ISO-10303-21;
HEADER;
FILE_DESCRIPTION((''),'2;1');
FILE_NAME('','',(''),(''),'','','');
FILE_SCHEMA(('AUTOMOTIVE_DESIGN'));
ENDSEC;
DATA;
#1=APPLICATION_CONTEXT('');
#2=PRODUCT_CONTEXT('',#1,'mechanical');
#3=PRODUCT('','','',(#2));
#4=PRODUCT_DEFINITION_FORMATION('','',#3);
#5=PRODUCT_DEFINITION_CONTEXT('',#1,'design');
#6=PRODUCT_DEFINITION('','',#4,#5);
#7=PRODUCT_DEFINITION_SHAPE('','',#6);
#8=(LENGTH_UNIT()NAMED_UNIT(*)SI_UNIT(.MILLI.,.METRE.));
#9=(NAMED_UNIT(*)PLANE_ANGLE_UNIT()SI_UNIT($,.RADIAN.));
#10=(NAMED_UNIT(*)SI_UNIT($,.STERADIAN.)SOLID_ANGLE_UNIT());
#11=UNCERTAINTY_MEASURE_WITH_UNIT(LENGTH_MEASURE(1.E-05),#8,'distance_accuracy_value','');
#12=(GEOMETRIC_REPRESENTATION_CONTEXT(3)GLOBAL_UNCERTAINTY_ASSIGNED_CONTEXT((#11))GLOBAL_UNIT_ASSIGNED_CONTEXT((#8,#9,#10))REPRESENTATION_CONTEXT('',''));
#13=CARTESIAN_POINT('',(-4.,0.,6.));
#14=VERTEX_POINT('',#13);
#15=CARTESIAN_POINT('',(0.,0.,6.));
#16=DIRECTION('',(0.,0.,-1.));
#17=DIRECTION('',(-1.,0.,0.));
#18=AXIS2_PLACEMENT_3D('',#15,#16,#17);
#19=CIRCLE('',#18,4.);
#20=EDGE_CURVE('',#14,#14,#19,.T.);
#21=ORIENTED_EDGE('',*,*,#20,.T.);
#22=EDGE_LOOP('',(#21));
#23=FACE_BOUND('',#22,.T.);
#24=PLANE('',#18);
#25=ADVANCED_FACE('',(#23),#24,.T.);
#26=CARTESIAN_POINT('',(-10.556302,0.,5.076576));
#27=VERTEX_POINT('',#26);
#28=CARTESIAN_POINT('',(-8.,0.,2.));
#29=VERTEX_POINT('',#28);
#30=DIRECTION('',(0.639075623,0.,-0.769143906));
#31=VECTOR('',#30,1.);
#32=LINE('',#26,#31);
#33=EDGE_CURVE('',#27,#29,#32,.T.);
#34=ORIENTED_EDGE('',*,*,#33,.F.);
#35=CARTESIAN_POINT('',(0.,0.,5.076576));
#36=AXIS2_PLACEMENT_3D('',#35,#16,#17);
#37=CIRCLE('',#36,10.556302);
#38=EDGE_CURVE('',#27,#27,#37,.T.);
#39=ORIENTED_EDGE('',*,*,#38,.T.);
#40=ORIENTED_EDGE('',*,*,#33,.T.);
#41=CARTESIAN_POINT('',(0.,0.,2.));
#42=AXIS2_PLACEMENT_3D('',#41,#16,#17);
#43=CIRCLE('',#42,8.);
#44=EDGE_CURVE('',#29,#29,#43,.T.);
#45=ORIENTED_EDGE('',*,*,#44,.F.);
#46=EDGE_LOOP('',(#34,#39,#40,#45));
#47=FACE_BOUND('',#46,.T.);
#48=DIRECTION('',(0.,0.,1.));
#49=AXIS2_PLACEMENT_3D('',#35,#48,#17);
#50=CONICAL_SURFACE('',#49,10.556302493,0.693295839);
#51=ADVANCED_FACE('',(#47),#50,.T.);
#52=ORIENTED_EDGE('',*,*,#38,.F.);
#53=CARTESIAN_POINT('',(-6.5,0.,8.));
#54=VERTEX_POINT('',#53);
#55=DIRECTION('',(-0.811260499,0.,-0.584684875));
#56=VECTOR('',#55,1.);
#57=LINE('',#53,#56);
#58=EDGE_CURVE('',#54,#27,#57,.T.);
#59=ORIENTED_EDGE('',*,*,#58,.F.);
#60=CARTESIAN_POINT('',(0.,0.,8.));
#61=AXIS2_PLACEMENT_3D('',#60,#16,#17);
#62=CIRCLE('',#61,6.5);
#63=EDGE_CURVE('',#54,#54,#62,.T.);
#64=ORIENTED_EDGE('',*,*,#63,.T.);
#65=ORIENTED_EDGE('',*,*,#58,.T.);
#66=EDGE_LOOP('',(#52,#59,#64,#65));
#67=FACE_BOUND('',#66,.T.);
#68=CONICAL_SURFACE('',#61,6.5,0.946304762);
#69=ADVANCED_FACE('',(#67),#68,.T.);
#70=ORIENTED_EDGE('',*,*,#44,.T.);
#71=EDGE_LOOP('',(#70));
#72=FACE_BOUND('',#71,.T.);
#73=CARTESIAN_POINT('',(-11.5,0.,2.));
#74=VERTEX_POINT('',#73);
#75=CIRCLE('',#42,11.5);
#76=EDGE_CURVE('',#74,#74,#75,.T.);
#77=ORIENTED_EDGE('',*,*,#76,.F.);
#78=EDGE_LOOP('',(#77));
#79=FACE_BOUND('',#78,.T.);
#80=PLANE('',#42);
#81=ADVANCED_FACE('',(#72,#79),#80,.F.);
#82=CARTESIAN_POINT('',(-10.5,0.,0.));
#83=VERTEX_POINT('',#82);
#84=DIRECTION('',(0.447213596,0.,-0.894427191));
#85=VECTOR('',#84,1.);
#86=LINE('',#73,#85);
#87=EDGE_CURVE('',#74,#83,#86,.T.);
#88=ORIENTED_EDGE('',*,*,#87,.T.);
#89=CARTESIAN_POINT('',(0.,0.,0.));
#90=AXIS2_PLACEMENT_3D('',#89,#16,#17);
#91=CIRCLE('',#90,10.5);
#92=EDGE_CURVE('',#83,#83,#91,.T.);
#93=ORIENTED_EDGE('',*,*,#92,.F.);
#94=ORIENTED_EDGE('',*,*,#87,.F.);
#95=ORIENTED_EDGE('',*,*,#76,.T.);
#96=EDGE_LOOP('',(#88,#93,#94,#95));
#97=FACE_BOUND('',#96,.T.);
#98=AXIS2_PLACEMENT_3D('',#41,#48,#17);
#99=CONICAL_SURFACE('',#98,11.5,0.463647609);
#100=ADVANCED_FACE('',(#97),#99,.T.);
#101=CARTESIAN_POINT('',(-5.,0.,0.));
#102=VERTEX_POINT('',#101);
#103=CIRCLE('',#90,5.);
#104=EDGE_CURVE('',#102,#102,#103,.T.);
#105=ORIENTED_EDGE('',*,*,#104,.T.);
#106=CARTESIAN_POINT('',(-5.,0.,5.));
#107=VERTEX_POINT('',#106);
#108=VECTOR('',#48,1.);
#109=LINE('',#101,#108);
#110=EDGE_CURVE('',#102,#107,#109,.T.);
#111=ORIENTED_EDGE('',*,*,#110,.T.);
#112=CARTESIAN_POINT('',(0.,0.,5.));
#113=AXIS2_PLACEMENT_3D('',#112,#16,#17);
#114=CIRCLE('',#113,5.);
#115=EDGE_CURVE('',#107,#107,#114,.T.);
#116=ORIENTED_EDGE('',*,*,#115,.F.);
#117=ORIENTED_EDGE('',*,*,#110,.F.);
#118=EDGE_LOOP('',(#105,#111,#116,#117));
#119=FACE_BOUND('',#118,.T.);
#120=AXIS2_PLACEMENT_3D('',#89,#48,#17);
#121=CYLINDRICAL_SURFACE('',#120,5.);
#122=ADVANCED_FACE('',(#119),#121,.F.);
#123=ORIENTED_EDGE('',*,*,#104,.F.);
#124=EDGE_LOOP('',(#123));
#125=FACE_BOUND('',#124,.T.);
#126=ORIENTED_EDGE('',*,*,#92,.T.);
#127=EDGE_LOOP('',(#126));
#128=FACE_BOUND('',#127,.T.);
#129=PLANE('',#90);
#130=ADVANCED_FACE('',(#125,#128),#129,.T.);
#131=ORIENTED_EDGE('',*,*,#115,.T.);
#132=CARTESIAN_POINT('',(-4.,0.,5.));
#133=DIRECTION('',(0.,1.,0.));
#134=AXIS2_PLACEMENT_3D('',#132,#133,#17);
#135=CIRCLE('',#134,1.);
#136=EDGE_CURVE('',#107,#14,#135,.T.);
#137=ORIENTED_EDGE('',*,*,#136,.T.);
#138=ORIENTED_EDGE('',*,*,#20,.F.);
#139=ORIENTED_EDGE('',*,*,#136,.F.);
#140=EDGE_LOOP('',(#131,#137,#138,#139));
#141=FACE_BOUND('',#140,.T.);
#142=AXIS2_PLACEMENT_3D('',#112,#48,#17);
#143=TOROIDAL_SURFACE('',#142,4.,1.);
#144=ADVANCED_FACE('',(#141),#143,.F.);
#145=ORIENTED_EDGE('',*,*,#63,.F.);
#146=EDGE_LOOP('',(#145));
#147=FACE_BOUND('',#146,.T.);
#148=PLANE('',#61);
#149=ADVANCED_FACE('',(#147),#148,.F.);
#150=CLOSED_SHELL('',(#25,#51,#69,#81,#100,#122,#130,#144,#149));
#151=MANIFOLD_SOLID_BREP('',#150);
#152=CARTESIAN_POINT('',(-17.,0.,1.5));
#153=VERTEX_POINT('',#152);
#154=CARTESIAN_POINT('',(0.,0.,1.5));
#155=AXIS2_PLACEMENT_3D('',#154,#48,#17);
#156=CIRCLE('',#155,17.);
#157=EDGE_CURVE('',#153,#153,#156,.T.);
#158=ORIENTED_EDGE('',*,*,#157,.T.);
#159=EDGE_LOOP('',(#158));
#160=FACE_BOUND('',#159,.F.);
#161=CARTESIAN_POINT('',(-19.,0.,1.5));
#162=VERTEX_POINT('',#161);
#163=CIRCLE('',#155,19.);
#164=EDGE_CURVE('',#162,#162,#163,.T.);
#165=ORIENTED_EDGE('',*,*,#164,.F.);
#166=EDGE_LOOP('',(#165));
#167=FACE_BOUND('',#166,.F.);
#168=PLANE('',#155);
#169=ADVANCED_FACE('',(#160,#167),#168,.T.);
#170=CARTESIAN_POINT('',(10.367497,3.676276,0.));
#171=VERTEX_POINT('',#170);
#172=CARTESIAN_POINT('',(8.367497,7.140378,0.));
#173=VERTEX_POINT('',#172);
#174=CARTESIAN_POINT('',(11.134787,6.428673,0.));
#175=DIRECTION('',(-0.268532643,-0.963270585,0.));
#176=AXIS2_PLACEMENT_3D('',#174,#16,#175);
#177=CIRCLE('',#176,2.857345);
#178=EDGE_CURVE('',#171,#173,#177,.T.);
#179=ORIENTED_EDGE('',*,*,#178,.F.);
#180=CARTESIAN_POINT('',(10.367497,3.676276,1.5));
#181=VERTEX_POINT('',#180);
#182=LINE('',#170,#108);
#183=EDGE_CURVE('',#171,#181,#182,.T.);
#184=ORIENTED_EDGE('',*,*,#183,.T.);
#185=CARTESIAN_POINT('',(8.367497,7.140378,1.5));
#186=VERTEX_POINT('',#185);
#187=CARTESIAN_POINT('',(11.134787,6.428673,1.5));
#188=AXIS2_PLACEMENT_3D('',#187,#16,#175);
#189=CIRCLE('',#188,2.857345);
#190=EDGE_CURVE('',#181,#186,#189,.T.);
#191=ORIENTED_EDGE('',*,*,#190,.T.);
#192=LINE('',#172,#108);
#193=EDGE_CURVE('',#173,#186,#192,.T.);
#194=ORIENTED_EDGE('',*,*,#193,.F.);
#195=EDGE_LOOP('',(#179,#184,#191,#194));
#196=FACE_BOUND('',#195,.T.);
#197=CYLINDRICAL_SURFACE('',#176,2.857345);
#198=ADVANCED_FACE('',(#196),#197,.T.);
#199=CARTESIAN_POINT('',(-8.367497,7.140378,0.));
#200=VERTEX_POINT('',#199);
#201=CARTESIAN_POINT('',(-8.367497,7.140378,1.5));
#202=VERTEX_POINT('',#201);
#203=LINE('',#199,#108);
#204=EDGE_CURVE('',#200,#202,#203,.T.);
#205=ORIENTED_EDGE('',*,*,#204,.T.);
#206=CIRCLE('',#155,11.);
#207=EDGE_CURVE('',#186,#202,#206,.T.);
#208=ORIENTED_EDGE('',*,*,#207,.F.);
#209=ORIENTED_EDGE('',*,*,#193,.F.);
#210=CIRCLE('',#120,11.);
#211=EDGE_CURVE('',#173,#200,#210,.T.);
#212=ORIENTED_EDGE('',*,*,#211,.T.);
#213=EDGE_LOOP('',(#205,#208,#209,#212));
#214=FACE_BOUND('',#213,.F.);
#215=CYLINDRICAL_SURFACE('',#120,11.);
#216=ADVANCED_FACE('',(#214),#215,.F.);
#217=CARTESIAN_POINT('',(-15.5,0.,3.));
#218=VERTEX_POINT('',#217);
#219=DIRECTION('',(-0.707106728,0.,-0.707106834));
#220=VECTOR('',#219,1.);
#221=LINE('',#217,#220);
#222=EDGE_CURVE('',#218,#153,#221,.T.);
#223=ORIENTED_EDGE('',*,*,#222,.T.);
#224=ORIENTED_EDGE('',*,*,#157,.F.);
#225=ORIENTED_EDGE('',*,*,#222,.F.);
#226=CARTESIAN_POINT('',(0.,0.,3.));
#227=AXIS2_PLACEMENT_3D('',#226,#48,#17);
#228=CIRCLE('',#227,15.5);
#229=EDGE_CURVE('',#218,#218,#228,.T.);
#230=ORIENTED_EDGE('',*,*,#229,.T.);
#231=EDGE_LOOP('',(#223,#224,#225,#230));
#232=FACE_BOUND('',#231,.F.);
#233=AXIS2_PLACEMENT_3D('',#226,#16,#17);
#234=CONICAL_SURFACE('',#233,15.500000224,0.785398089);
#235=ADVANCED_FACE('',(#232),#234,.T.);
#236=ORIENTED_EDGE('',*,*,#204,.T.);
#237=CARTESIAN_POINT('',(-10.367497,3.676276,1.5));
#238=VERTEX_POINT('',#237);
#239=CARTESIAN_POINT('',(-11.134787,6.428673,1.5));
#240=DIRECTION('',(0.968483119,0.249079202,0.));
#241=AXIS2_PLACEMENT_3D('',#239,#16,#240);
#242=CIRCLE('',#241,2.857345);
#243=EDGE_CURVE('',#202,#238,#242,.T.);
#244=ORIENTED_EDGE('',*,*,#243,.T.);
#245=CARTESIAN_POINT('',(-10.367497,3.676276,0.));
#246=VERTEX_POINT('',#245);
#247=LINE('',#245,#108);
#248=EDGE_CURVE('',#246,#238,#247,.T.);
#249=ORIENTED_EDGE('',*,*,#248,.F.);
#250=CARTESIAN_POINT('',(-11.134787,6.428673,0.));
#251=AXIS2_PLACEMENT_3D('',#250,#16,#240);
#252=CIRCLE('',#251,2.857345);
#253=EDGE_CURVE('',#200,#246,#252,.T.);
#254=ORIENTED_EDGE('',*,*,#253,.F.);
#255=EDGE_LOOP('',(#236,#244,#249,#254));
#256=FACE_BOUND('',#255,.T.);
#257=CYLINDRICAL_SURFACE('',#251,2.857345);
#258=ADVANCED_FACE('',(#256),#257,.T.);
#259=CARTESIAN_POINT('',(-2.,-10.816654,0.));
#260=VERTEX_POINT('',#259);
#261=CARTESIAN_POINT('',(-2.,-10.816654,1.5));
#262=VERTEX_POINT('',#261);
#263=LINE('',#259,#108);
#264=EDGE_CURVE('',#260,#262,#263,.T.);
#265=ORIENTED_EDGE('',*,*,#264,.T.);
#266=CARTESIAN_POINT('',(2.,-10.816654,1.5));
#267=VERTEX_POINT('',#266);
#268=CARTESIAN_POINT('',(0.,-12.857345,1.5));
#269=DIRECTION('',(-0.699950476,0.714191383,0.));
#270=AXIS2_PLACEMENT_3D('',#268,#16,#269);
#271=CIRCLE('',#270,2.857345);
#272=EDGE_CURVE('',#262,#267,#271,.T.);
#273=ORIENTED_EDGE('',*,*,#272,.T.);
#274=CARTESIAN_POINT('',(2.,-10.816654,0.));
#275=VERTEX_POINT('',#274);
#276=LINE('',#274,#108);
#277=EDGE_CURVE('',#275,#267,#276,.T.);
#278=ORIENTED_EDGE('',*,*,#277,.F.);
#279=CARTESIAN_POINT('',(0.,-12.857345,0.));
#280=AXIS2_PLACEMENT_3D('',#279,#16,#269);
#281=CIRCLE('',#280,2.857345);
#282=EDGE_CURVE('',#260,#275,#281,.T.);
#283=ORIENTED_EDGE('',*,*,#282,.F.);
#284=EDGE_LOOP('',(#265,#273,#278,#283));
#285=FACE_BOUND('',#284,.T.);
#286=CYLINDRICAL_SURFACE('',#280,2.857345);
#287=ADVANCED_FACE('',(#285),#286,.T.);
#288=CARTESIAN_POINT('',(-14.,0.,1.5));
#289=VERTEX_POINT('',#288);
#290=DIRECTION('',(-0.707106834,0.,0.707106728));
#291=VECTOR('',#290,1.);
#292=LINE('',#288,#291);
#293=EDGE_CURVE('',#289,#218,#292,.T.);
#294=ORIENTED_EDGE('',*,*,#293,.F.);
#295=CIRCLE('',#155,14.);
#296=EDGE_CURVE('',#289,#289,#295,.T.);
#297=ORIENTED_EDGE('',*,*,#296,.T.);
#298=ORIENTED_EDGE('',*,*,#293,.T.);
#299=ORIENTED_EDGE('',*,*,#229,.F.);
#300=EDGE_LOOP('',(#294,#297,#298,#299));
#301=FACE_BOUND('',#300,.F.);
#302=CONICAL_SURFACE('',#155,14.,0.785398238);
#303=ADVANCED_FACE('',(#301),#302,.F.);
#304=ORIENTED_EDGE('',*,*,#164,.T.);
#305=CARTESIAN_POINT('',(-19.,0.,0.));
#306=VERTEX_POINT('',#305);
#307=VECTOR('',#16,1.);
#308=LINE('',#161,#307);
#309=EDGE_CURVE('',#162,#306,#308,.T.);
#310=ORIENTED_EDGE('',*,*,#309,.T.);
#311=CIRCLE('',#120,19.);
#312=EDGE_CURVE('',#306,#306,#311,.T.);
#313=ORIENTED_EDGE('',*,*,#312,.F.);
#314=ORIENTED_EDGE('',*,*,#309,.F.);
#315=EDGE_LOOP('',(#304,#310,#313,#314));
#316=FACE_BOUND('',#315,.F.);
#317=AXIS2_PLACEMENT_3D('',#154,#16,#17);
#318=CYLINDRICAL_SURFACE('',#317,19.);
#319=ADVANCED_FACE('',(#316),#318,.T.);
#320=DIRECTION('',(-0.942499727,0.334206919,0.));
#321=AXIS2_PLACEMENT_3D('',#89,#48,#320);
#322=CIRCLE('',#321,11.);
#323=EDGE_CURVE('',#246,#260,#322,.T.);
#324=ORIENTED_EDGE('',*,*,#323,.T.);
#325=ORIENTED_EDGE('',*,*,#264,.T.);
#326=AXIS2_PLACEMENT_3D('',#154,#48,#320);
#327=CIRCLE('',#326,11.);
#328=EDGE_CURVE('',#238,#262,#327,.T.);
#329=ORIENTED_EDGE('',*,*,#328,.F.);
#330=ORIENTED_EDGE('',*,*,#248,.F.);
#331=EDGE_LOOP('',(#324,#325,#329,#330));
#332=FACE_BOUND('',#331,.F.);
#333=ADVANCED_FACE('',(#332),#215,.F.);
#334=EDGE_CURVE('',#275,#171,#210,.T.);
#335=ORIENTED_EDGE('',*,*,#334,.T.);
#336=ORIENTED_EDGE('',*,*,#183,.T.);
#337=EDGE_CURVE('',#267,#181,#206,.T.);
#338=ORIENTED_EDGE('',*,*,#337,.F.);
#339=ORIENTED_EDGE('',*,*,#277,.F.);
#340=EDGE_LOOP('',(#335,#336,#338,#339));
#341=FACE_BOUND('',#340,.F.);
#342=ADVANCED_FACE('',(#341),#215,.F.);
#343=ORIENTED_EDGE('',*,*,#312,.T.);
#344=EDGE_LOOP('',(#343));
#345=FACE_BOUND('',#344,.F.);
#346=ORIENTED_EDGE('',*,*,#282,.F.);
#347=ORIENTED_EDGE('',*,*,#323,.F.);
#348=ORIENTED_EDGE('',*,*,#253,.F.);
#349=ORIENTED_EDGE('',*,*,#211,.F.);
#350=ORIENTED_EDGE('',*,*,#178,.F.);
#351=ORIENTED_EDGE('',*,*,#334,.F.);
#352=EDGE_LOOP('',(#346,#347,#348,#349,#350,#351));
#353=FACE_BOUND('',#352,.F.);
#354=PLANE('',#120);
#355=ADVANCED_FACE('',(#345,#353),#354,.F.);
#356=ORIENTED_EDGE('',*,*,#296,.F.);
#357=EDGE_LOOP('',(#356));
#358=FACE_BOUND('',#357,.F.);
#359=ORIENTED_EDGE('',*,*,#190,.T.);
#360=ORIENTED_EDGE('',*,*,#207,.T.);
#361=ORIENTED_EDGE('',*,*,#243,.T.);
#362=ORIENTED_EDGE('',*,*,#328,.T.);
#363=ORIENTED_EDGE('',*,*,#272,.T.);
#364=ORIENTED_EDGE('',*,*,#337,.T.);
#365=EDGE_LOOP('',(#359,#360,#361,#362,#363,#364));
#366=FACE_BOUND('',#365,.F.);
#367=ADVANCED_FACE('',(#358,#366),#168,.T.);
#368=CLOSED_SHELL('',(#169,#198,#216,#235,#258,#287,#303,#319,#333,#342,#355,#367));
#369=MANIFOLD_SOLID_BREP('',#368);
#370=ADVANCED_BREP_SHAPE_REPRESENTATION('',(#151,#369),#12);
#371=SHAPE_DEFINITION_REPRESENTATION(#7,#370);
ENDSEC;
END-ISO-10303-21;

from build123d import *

# Parameters (mm, degrees)
F5_DEPTH = 1.5


with BuildPart() as f1:
    # F0 (on Front) → F1 (revolve)
    with BuildSketch(Plane.XZ):
        with BuildLine():
            Line((-11.5, 2), (-10.5, 0))
            Line((-10.5, 0), (-5, 0))
            Line((-5, 0), (-5, 5))
            ThreePointArc((-5, 5), (-4.7071067812, 5.7071067812), (-4, 6))
            Line((-4, 6), (0, 6))
            Line((0, 6), (0, 8))
            Line((0, 8), (-6.5, 8))
            Line((-6.5, 8), (-10.5563024928, 5.0765756232))
            Line((-10.5563024928, 5.0765756232), (-8, 2))
            Line((-8, 2), (-11.5, 2))
        make_face()
    revolve(axis=Axis((0, 0, 7), (0, 0, -1)))


with BuildPart() as f3:
    # F2 (on Front) → F3 (revolve)
    with BuildSketch(Plane.XZ):
        Polygon((-19, 1.5), (-19, 0), (-11, 0), (-11, 1.5), (-14, 1.5), (-15.500000224, 3), (-17, 1.5), align=None)
    revolve(axis=Axis((0, 0, 1.6170465387), (0, 0, 1)))

    # F4 (on face) → F5 (join, through all)
    with BuildSketch(Plane(origin=(0, 0, 0), x_dir=(1, 0, 0), z_dir=(0, 0, -1))):
        with BuildLine():
            ThreePointArc((2, 10.8166538264), (0, 11), (-2, 10.8166538264))
            ThreePointArc((-2, 10.8166538264), (0, 10), (2, 10.8166538264))
        make_face()
        with BuildLine():
            ThreePointArc((-8.3674969976, -7.1403777208), (-8.6602540378, -5), (-10.3674969976, -3.6762761056))
            ThreePointArc((-10.3674969976, -3.6762761056), (-9.5262794416, -5.5), (-8.3674969976, -7.1403777208))
        make_face()
        with BuildLine():
            ThreePointArc((8.3674969976, -7.1403777208), (9.5262794416, -5.5), (10.3674969976, -3.6762761056))
            ThreePointArc((10.3674969976, -3.6762761056), (8.6602540378, -5), (8.3674969976, -7.1403777208))
        make_face()
    extrude(amount=-F5_DEPTH)


solid = Compound([f1.part, f3.part])
